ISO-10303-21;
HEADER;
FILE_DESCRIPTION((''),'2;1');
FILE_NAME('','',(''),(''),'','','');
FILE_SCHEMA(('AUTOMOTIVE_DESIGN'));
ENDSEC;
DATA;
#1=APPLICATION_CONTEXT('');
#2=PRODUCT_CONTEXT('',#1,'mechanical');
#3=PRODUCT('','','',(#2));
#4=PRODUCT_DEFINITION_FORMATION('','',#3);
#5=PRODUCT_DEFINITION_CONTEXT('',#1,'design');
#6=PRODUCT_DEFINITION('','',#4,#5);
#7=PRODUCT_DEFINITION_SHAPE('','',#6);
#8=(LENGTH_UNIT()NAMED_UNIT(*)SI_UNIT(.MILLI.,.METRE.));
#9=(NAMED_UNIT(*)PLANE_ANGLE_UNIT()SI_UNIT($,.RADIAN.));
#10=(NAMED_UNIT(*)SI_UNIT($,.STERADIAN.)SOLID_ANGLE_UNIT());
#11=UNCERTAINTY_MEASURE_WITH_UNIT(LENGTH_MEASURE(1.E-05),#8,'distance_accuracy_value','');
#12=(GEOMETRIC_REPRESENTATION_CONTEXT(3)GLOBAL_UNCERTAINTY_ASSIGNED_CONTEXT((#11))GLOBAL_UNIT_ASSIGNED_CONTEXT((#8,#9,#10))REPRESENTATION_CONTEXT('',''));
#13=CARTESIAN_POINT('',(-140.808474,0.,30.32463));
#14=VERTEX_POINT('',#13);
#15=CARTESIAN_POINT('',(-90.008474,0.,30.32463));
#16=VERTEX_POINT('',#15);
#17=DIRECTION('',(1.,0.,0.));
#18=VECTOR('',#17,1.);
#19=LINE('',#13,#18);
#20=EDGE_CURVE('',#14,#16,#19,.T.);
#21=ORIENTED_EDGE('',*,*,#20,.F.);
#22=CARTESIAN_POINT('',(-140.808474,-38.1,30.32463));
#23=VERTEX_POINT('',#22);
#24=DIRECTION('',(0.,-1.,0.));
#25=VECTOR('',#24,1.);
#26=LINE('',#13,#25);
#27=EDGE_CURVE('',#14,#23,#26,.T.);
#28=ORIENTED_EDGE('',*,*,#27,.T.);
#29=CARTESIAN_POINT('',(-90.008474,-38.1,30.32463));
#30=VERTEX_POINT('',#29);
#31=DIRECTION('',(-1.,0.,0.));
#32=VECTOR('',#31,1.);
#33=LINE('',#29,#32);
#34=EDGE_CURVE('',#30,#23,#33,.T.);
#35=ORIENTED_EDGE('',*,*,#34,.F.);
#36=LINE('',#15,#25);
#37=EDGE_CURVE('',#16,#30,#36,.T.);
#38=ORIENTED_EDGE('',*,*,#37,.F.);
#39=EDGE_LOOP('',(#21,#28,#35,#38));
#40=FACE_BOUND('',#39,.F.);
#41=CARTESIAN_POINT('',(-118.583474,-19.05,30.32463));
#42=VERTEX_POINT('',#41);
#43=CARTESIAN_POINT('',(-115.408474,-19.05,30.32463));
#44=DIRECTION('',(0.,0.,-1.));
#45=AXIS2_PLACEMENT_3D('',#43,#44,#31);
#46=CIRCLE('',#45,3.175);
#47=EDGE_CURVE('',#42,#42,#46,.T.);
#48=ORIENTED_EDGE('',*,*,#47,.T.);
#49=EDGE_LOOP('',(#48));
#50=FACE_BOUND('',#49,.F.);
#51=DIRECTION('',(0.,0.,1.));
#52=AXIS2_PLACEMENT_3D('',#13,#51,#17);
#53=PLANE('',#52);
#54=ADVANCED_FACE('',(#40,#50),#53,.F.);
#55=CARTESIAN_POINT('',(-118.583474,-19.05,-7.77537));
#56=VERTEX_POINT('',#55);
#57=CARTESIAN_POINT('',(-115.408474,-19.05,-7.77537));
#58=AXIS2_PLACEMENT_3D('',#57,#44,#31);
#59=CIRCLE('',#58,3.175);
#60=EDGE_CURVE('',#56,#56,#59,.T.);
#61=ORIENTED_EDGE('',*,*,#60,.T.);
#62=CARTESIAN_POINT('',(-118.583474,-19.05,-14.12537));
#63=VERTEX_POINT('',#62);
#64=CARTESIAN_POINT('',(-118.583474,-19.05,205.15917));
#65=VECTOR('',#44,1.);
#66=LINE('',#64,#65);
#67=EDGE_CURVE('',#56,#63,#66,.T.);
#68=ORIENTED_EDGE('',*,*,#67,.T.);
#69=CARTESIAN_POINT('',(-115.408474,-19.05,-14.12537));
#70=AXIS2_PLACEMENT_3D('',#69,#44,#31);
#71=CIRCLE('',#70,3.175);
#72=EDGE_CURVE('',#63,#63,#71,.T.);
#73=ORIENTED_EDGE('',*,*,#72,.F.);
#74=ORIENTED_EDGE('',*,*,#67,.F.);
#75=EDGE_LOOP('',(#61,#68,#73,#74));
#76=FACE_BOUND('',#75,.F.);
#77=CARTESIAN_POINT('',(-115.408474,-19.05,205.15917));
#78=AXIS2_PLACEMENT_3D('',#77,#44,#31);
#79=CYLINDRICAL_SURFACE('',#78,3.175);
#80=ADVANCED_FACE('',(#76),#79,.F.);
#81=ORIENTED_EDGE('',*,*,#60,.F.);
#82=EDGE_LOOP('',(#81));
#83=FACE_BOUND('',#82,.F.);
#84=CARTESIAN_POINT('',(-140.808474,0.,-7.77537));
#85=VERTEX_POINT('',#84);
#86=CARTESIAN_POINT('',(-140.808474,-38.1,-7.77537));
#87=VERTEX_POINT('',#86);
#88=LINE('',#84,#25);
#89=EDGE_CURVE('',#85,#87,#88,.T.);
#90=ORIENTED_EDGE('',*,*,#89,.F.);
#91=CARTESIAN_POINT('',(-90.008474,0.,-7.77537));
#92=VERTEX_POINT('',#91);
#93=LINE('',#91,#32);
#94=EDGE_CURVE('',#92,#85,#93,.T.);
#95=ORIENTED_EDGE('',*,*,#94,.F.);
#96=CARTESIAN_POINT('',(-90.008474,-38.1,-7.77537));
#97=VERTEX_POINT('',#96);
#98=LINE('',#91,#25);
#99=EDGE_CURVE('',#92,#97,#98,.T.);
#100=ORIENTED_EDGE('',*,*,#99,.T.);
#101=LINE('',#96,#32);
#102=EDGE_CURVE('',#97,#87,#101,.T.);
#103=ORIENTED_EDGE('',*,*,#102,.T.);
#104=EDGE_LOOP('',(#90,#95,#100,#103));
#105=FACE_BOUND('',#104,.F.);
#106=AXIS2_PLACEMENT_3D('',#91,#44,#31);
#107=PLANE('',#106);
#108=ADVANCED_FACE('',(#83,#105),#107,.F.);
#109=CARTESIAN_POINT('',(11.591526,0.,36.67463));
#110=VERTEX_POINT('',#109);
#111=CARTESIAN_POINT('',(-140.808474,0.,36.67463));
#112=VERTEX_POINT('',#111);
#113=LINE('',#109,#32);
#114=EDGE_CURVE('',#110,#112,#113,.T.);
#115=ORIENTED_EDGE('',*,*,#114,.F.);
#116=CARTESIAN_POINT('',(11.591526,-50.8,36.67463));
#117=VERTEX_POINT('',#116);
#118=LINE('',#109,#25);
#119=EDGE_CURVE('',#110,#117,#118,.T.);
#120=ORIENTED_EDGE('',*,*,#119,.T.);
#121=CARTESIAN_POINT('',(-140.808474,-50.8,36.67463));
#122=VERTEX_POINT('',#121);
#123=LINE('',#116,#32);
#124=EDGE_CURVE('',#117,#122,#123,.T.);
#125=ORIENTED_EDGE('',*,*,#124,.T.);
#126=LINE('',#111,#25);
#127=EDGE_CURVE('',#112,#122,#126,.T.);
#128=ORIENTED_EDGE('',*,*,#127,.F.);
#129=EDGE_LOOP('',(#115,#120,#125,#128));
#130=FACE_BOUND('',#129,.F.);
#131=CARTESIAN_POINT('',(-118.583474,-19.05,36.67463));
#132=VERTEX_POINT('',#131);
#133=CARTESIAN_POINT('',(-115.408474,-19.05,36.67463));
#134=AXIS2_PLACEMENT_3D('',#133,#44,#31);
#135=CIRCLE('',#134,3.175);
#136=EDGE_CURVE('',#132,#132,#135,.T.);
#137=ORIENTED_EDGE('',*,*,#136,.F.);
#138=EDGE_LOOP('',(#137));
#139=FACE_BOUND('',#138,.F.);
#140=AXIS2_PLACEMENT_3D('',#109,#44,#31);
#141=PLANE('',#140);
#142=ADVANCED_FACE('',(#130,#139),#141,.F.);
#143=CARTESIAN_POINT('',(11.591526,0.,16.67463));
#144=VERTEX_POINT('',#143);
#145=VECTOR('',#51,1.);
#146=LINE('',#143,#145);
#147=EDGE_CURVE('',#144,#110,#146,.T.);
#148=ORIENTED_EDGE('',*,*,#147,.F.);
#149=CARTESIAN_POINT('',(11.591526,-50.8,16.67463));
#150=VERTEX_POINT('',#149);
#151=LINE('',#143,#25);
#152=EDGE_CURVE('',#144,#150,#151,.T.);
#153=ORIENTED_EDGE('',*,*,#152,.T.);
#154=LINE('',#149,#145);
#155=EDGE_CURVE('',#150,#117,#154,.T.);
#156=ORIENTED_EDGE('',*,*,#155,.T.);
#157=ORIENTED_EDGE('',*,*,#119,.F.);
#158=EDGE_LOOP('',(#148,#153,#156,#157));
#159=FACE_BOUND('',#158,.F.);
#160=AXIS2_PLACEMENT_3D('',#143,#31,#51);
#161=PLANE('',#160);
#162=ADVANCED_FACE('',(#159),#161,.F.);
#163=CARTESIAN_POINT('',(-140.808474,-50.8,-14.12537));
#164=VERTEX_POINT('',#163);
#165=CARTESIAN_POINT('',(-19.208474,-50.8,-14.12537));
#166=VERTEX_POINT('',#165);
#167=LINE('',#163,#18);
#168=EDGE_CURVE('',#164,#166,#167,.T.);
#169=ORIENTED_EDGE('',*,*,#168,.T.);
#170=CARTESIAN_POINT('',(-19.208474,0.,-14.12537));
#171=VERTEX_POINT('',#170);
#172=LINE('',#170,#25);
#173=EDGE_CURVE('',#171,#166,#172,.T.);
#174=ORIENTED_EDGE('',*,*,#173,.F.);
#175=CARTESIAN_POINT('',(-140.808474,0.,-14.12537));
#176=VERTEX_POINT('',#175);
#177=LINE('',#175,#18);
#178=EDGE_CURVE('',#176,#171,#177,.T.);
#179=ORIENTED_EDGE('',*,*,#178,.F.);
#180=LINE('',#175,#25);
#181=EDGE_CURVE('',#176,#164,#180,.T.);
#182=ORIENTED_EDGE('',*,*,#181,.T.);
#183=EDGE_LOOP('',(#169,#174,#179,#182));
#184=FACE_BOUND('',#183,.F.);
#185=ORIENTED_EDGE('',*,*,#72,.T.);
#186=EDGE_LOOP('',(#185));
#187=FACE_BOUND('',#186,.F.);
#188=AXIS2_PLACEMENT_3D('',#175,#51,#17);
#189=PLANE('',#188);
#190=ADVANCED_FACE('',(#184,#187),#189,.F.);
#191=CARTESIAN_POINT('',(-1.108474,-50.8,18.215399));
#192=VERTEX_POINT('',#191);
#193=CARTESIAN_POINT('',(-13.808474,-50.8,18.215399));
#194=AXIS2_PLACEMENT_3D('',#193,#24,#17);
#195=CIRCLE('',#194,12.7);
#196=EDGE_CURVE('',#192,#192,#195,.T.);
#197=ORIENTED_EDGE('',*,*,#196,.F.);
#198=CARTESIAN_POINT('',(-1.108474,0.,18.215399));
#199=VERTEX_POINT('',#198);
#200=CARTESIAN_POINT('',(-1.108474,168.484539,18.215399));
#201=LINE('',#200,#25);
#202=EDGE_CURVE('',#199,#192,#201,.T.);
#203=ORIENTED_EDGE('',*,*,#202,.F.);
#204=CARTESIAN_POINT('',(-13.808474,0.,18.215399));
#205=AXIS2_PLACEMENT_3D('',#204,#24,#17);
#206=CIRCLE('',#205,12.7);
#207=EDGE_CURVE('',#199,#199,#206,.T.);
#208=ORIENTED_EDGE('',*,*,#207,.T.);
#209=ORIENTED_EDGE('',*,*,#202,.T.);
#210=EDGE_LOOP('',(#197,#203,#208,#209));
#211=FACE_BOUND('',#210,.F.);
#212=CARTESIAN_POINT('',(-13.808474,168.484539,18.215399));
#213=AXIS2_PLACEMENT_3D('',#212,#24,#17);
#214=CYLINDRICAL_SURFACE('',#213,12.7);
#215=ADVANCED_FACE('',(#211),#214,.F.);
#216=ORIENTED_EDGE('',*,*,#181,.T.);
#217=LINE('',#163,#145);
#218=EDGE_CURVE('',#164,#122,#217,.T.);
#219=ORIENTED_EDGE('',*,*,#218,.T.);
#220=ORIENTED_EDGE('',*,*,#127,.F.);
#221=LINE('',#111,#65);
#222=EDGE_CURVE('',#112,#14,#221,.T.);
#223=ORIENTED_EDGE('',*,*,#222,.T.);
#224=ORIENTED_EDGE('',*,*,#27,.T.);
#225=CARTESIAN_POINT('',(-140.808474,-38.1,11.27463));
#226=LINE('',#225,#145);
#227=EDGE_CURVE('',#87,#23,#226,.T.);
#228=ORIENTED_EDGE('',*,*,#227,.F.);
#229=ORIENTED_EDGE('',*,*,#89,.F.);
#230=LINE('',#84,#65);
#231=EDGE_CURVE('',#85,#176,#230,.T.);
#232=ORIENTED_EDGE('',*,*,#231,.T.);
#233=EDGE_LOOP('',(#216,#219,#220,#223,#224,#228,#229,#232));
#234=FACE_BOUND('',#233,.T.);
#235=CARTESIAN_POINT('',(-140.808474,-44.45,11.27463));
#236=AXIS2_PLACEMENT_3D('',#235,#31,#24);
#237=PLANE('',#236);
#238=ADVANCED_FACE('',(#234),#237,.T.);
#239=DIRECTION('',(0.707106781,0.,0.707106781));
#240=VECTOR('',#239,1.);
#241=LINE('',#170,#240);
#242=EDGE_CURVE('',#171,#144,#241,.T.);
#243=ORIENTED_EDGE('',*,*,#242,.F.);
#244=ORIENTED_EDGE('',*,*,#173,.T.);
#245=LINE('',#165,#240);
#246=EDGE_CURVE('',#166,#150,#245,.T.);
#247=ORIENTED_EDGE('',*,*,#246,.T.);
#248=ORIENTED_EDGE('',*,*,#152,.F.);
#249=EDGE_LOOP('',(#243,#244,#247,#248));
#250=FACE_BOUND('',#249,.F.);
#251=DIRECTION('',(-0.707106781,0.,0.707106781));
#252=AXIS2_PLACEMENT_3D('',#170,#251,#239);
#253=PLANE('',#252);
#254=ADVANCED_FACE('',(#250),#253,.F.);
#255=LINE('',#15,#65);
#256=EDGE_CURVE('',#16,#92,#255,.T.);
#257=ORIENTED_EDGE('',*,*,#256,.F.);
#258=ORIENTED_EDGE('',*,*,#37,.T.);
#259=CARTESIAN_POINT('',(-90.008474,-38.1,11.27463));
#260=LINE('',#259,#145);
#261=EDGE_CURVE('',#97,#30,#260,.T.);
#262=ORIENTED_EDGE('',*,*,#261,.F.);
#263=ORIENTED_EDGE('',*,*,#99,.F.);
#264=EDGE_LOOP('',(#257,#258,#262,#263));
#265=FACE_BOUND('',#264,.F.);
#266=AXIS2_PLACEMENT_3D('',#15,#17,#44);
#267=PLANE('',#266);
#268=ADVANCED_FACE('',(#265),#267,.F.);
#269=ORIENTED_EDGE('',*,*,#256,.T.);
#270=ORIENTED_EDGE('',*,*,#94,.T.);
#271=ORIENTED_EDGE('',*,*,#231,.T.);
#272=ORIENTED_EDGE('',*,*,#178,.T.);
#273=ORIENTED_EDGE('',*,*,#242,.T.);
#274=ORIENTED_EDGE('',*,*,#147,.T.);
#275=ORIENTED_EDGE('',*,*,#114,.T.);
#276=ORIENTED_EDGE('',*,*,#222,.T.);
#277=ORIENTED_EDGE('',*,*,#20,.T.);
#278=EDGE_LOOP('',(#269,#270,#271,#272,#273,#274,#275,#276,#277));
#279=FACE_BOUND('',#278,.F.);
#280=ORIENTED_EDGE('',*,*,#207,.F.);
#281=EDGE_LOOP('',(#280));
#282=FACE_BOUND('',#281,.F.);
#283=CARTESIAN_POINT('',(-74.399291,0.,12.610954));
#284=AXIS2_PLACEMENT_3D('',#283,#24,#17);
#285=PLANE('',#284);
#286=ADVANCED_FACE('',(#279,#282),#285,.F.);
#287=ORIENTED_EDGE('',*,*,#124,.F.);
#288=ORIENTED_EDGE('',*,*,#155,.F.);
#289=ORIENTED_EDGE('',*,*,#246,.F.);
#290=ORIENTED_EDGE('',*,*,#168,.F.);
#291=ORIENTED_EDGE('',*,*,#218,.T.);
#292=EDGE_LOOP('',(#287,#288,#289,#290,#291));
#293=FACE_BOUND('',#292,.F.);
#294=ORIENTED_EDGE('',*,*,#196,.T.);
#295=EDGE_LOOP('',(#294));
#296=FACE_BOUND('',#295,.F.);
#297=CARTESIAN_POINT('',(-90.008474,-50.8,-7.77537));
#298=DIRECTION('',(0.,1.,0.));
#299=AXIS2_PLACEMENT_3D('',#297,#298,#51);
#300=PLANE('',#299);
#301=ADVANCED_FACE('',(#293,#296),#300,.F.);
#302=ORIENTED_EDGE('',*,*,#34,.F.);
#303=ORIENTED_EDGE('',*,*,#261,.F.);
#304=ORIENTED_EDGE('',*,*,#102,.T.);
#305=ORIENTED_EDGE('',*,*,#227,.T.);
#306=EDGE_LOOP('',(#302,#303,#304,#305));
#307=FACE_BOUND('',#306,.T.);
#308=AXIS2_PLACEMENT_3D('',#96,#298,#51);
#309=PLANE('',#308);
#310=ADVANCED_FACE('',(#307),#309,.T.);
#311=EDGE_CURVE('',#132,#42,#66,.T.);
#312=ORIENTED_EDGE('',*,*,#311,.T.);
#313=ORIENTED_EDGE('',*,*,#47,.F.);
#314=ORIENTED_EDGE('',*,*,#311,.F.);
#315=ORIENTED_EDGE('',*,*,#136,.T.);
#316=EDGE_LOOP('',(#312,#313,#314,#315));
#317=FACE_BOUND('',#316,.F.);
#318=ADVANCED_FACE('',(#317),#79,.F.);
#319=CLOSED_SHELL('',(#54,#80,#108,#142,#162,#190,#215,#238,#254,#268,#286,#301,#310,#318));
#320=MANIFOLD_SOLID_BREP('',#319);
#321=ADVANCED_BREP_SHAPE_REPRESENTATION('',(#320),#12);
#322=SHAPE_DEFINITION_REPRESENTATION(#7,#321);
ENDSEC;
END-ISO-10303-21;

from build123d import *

# Parameters (mm, degrees)
F1_DEPTH = 50.8
F2_W     = 12.7
F2_H     = 38.1
F3_DEPTH = 50.8
F5_D     = 25.4
F7_D     = 6.35


# Not quite as in the source:
# - a feature names something its author has since deleted; it is built from what else it names


with BuildPart() as f1:
    # F0 (on Front) → F1 (new body)
    with BuildSketch(Plane.XZ):
        Polygon((-140.8084735786, 36.6746302678), (-140.8084735786, 30.3246302678), (-90.0084735786, 30.3246302678), (-90.0084735786, -7.7753697322), (-140.8084735786, -7.7753697322), (-140.8084735786, -14.1253697322), (-19.2084735786, -14.1253697322), (11.5915264214, 16.6746302678), (11.5915264214, 36.6746302678), align=None)
    extrude(amount=F1_DEPTH)

    # F2 (on face) → F3 (join)
    with BuildSketch(Plane(origin=(-90.0084735786, 0, 0), x_dir=(0, -1, 0), z_dir=(-1, 0, 0))):
        with Locations((44.45, 11.2746302678)):
            Rectangle(F2_W, F2_H)
    extrude(amount=F3_DEPTH)

    # F5 (through all)
    with Locations(Plane(origin=(0, 0, 0), x_dir=(-1, 0, 0), z_dir=(0, 1, 0))):
        with Locations((13.8084735786, 18.215398631)):
            Hole(F5_D / 2)

    # F7 (through all)
    with Locations(Plane.XY.offset(36.6746302678)):
        with Locations((-115.4084735786, -19.05)):
            Hole(F7_D / 2)


solid = f1.part
